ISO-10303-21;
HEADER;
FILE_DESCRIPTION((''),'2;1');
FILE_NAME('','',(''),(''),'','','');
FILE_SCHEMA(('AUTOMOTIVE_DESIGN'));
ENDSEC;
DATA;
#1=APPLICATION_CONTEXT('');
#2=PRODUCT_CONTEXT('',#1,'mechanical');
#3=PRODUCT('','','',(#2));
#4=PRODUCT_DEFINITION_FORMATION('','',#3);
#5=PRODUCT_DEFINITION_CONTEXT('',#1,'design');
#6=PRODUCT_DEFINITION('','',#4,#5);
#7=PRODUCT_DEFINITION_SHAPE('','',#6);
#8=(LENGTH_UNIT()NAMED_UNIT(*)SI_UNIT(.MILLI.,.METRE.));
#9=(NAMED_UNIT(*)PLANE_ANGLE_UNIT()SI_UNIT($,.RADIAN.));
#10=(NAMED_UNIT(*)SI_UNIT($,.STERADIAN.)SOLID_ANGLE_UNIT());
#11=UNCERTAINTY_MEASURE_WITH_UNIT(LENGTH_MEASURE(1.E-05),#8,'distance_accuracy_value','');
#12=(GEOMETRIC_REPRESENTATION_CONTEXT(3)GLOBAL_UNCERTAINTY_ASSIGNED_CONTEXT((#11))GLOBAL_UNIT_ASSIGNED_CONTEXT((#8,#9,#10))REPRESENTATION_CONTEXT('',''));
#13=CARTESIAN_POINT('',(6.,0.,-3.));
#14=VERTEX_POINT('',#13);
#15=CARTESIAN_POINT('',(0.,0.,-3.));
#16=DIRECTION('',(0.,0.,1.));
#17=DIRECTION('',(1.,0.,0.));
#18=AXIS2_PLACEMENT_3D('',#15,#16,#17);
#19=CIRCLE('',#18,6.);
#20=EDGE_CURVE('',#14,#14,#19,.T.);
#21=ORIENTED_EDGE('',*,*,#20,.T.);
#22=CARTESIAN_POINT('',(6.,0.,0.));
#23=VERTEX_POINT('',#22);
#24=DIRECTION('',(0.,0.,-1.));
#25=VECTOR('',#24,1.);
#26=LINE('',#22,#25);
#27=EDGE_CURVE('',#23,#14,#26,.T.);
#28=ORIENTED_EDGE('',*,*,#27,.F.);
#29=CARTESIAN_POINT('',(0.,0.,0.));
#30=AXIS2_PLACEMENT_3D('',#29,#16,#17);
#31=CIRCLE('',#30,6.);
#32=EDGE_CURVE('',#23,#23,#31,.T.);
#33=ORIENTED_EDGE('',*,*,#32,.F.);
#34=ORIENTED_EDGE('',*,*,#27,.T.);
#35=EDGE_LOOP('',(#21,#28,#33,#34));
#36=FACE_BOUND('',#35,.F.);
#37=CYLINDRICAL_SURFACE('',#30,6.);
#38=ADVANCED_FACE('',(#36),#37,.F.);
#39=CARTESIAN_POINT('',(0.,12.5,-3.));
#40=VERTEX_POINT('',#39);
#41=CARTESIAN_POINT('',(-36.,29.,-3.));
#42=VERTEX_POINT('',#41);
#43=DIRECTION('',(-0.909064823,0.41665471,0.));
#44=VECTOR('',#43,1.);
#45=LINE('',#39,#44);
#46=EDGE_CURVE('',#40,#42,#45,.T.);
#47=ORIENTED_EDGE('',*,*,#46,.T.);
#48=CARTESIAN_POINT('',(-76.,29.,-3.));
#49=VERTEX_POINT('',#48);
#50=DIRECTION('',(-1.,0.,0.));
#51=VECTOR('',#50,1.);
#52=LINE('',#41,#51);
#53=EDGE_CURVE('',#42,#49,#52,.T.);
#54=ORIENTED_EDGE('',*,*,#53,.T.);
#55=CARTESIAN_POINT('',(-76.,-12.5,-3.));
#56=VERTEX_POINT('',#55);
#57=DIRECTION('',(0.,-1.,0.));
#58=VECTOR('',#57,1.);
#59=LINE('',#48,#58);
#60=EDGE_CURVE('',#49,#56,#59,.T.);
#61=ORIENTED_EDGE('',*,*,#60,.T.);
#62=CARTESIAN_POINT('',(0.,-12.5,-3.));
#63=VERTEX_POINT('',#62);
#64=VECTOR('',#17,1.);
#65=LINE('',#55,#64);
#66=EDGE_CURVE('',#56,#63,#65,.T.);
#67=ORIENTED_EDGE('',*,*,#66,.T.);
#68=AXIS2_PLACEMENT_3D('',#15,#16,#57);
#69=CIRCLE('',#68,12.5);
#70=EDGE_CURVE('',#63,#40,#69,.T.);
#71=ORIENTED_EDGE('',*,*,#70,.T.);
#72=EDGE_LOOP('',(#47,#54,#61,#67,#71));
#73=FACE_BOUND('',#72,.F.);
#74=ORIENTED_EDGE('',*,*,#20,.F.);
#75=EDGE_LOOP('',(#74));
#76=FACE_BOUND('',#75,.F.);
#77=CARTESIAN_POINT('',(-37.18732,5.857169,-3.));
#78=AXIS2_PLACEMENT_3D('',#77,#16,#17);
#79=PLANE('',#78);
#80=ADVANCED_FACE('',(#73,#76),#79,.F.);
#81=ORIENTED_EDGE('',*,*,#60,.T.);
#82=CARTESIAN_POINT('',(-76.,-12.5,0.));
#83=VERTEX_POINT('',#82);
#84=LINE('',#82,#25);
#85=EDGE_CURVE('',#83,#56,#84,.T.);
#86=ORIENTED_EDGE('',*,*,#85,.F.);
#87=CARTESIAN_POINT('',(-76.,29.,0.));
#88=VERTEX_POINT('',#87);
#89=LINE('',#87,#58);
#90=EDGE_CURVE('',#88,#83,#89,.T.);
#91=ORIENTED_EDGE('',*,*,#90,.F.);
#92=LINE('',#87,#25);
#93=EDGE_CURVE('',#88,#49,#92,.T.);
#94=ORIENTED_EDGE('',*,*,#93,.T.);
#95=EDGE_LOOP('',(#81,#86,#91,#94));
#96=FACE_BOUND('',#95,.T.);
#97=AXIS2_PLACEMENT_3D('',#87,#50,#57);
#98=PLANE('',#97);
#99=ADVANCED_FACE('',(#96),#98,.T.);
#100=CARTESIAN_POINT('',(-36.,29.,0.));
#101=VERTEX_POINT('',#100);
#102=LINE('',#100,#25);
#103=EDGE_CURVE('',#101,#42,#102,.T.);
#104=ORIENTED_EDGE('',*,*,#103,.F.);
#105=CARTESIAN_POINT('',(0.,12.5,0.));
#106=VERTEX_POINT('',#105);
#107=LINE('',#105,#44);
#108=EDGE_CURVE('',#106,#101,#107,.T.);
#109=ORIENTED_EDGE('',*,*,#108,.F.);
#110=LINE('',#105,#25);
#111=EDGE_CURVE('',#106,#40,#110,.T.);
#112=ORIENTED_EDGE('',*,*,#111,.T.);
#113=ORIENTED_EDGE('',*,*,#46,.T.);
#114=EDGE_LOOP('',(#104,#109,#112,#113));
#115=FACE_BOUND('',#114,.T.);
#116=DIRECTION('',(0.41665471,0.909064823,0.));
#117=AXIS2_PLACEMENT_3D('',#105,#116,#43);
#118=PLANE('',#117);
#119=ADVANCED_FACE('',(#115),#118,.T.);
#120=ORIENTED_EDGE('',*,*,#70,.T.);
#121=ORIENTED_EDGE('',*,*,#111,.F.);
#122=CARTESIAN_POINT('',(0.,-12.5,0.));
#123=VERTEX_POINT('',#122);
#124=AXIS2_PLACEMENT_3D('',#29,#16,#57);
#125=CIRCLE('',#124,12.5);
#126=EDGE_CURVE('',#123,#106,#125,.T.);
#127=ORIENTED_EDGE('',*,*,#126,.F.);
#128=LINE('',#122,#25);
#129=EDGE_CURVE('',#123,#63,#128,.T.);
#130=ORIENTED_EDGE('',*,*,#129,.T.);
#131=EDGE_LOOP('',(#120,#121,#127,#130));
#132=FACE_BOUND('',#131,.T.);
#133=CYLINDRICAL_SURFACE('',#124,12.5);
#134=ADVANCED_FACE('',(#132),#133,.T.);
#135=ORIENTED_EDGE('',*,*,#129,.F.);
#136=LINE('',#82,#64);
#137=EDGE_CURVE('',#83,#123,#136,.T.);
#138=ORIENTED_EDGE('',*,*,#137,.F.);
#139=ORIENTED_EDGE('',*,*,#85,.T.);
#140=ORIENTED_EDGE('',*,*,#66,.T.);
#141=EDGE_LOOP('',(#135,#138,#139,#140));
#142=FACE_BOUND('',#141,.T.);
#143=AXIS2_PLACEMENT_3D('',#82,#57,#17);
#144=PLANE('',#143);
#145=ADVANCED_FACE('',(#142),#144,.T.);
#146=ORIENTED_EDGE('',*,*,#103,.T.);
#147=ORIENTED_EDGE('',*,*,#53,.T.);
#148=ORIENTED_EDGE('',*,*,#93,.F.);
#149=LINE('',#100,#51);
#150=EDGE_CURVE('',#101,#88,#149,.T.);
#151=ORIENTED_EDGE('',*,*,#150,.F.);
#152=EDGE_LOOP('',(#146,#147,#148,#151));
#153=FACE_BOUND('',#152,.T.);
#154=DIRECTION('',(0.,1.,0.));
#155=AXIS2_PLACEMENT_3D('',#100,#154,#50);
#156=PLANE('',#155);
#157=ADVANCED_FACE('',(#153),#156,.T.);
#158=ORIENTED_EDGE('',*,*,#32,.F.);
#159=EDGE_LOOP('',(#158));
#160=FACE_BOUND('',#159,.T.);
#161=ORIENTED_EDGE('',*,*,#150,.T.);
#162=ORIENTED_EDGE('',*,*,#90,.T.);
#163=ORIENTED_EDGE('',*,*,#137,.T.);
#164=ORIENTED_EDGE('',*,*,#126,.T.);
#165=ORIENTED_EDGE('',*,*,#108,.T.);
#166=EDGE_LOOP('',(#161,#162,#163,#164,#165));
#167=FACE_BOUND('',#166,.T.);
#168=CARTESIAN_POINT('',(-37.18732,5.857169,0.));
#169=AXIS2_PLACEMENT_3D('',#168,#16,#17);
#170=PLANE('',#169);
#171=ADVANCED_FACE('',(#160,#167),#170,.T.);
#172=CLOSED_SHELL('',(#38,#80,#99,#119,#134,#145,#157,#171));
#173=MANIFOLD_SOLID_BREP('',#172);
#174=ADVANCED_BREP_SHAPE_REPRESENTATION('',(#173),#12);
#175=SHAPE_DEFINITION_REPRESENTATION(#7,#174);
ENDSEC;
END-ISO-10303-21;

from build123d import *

# Parameters (mm, degrees)
F0_R     = 6
F1_DEPTH = 3


# Not quite as in the source:
# - a feature names something its author has since deleted; it is built from what else it names


with BuildPart() as f1:
    # F0 (on Top) → F1 (new body)
    with BuildSketch(Plane.XY):
        with BuildLine():
            Line((-36, 29), (-76, 29))
            Line((-76, 29), (-76, -12.5))
            Line((-76, -12.5), (0, -12.5))
            ThreePointArc((0, -12.5), (12.5, 0), (0, 12.5))
            Line((0, 12.5), (-36, 29))
        make_face()
        Circle(F0_R, mode=Mode.SUBTRACT)
    extrude(amount=-F1_DEPTH)


solid = f1.part
